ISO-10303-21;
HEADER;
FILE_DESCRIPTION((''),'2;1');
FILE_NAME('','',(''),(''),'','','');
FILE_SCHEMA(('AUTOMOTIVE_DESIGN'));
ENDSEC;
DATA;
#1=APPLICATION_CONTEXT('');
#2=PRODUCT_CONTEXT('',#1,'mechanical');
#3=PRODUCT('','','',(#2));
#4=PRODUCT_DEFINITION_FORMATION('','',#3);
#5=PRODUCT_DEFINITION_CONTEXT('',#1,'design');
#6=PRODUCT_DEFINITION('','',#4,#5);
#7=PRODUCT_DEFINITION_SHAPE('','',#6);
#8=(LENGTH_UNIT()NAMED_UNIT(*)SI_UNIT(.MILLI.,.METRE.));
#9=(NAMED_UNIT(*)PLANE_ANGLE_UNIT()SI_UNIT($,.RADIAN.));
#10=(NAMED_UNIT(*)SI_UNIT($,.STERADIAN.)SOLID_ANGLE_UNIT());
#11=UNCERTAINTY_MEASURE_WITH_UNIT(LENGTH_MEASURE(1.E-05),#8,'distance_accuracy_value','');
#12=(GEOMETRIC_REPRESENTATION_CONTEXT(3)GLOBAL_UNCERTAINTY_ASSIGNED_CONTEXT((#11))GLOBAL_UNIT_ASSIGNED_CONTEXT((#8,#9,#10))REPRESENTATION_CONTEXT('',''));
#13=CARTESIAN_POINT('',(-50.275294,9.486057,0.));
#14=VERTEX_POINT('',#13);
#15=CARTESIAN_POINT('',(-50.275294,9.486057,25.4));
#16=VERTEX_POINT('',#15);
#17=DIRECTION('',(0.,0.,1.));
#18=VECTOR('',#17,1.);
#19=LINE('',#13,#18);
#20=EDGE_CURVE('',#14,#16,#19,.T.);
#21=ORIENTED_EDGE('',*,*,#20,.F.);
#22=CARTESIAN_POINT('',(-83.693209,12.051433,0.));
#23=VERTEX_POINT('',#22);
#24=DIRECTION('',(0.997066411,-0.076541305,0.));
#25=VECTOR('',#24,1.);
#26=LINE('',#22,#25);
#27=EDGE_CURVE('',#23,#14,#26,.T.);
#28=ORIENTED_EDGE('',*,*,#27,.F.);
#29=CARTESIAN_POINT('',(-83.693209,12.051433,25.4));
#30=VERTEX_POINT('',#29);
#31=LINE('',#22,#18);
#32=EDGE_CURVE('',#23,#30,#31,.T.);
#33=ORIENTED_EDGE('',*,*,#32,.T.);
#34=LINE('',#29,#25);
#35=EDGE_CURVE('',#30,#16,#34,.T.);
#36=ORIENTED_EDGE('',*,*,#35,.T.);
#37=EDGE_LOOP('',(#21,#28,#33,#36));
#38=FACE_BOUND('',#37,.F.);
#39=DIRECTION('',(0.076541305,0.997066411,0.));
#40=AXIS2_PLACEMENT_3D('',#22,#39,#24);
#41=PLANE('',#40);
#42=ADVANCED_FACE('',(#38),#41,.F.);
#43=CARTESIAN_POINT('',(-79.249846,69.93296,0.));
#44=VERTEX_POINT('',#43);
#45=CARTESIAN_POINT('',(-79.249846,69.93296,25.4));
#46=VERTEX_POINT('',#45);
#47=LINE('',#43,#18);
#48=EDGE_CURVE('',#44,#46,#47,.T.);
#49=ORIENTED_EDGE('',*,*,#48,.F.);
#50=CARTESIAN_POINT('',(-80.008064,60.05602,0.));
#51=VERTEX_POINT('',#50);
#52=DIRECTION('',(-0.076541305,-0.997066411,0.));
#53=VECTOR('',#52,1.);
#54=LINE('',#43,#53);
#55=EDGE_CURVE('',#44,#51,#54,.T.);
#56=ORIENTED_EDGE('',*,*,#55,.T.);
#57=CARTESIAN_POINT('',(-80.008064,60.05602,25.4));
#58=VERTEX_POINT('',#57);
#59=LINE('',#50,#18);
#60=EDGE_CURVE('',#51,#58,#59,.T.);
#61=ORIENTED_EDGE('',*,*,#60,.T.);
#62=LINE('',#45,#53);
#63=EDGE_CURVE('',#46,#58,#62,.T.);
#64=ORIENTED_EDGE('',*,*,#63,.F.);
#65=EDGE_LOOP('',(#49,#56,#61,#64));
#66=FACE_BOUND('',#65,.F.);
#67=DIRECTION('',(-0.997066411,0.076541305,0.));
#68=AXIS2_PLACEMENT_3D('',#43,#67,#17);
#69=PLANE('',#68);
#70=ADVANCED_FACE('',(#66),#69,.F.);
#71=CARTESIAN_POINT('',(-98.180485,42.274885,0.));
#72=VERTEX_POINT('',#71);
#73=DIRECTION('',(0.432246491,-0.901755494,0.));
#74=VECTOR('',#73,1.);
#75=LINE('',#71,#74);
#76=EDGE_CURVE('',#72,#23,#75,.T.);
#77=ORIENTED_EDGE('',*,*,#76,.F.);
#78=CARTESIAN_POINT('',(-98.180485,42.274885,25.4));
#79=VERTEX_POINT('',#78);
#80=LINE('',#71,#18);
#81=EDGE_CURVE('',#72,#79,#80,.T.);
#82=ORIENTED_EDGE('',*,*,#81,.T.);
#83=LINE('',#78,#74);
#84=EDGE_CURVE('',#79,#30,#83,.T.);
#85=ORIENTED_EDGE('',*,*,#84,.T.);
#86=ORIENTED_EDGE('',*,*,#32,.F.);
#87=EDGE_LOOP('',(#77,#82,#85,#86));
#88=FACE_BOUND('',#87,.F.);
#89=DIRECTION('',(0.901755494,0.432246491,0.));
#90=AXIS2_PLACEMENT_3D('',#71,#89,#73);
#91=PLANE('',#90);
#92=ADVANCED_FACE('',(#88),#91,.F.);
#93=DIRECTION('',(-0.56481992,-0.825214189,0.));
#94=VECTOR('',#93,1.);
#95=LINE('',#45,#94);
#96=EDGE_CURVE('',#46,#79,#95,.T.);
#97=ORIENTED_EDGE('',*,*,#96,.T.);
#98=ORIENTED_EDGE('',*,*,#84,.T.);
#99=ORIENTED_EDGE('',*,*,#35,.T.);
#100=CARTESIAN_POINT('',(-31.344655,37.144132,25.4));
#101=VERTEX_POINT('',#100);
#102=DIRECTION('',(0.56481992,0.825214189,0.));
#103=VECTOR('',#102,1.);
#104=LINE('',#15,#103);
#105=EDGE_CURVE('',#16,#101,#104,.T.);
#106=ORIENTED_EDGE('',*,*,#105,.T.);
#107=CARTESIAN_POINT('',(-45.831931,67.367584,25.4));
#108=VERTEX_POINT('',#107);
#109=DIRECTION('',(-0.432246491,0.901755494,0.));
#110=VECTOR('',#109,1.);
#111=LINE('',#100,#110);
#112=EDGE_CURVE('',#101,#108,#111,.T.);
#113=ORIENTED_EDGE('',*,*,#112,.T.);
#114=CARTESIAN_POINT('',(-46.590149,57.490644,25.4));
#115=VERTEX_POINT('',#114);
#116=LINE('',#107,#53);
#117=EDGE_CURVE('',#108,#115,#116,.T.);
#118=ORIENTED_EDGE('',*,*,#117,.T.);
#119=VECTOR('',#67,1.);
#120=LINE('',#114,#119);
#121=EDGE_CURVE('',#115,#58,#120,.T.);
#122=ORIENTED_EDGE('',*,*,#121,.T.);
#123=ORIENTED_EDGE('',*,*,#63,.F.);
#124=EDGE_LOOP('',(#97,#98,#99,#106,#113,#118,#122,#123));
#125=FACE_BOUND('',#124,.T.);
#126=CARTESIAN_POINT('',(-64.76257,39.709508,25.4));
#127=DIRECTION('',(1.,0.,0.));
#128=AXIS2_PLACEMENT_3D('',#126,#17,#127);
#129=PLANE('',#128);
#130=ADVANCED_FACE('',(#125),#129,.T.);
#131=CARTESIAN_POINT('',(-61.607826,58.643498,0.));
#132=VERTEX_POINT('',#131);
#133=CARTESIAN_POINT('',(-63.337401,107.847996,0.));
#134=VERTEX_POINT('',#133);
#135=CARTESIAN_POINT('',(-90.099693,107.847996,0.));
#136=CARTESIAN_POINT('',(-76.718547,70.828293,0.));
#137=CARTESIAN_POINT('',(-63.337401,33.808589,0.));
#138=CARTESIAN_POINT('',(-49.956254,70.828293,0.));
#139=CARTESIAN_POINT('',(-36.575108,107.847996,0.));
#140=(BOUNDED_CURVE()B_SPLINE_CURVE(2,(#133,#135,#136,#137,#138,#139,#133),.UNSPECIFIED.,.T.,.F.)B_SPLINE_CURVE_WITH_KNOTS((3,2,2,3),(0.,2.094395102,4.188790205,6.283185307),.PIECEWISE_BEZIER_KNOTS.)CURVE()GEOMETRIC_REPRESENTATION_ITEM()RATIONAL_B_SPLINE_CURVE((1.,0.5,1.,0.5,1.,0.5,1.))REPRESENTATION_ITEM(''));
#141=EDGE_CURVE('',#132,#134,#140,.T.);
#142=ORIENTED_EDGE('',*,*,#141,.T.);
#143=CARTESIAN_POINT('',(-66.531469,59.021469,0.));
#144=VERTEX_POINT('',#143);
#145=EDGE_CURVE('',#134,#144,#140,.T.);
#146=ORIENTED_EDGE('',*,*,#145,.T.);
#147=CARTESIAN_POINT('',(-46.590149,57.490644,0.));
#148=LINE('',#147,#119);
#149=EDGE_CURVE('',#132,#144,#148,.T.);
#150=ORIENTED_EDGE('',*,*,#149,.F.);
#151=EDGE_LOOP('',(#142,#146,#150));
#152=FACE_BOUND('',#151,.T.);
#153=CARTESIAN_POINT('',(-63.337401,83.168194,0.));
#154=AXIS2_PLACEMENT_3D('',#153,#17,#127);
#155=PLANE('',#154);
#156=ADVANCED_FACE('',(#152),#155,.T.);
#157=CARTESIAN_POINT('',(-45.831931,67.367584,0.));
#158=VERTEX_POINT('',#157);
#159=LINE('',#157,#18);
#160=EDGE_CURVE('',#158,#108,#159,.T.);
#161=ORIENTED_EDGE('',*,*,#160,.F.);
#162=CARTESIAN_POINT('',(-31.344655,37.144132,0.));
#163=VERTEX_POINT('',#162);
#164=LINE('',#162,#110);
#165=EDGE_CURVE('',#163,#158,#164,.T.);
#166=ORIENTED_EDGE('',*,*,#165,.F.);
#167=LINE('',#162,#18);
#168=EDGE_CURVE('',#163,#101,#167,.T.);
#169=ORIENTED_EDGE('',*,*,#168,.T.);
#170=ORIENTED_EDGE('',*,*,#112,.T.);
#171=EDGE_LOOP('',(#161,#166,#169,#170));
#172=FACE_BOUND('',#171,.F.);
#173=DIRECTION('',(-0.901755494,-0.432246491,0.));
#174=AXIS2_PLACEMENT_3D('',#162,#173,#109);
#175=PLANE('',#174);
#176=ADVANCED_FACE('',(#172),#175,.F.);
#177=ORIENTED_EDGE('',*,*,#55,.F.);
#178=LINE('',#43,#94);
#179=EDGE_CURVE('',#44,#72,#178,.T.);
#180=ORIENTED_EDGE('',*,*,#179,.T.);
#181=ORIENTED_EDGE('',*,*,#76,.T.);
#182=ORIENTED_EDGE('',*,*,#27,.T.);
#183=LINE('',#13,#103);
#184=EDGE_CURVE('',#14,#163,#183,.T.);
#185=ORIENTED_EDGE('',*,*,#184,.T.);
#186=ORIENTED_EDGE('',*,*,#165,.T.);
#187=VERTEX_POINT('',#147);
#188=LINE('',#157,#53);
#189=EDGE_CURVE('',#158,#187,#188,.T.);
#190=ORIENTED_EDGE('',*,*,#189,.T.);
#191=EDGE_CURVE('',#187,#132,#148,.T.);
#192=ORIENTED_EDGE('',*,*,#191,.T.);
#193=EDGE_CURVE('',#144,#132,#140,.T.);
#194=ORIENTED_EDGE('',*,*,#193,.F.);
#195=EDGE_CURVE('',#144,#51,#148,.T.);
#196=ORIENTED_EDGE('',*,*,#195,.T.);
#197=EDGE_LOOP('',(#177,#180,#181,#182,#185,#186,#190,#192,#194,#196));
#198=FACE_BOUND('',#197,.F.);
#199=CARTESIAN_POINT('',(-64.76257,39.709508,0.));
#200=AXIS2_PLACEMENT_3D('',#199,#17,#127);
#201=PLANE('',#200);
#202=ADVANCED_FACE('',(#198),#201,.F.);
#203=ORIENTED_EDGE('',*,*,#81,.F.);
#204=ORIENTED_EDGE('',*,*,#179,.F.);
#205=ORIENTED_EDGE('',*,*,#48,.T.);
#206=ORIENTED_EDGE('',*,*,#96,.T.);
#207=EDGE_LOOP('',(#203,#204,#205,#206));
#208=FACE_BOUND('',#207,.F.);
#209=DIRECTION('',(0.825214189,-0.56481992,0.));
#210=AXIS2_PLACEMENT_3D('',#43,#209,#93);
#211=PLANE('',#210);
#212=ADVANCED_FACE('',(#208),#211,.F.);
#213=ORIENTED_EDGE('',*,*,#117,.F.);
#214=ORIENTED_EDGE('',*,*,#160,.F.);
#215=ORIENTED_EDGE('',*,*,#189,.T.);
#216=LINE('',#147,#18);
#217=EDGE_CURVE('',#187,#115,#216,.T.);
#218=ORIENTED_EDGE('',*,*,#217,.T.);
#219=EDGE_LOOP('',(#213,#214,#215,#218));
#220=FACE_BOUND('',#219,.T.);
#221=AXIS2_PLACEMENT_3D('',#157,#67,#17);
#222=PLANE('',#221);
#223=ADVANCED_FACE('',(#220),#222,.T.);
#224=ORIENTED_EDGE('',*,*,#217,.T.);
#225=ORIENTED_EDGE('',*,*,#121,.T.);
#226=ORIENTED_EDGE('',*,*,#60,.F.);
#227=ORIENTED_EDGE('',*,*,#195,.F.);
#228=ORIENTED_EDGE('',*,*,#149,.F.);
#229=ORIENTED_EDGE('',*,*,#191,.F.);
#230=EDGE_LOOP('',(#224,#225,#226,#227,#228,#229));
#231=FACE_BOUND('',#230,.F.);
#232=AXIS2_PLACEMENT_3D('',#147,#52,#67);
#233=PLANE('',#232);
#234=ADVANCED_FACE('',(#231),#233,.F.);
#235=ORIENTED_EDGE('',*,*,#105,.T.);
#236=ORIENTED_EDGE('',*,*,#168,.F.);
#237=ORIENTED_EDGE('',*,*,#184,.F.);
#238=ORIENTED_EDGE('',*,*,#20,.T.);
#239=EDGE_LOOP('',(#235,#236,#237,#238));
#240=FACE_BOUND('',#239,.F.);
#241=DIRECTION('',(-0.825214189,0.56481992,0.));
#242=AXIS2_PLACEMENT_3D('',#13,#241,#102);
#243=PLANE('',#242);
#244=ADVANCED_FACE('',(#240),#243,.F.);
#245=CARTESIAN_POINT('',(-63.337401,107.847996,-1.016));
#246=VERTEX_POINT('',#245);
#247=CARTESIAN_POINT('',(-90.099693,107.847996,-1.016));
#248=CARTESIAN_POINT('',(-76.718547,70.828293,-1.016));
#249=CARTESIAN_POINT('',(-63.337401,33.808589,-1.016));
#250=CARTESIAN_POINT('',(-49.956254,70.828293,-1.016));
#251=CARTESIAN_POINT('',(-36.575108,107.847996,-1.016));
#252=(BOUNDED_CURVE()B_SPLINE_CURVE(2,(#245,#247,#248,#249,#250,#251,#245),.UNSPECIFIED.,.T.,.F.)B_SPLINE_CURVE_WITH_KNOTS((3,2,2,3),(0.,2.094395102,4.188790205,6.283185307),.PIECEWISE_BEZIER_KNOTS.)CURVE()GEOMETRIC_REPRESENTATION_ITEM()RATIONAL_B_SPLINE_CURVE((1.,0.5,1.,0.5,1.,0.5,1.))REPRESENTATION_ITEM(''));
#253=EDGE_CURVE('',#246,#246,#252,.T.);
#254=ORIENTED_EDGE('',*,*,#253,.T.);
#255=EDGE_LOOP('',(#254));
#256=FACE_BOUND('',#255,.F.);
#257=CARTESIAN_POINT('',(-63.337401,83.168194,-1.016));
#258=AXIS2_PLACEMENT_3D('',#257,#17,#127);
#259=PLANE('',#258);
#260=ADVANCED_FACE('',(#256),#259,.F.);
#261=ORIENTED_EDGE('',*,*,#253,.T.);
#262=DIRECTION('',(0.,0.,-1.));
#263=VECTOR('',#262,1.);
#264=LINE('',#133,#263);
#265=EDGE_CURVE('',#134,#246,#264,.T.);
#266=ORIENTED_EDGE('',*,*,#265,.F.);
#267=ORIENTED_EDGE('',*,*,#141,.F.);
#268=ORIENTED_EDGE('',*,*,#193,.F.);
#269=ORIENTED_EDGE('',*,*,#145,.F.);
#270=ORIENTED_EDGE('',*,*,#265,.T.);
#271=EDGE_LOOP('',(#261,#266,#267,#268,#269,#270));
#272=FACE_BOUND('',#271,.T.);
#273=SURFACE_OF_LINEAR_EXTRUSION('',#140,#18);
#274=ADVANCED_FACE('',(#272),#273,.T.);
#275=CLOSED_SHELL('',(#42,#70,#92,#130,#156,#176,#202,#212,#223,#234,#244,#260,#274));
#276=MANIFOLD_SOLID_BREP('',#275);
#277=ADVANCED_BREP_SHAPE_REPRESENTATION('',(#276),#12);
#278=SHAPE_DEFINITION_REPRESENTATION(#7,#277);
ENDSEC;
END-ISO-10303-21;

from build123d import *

# Parameters (mm, degrees)
F2_DEPTH = 25.4
F4_DEPTH = 9.906
F6_DEPTH = 1.016


# Not quite as in the source:
# - the program builds the solid bodies; features that only make, move or delete a surface that nothing else refers to are left out


with BuildPart() as f2:
    # F0 (on Top) → F2 (new body)
    with BuildSketch(Plane.XY):
        Polygon((-98.1804851865, 42.2748850128), (-83.6932088757, 12.0514331916), (-50.2752936531, 9.4860565979), (-31.3446547413, 37.1441318253), (-45.8319310522, 67.3675836465), (-79.2498462748, 69.9329602402), align=None)
    extrude(amount=F2_DEPTH)

    # F4 (cut): a face of the model
    f4_faces = [f2.faces().sort_by_distance(p)[0] for p in [
        (-62.5408886635, 68.6502719433, 12.7),
    ]]
    extrude(f4_faces, amount=-F4_DEPTH, mode=Mode.SUBTRACT)

    # F5 (on Top) → F6 (join)
    with BuildSketch(Plane.XY):
        with BuildLine():
            add(Edge.make_bspline(
                [(-63.3374005556, 107.8479960561), (-90.0996928702, 107.8479960561), (-76.7185467129, 70.8282925189), (-63.3374005556, 33.8085889816), (-49.9562543983, 70.8282925189), (-36.575108241, 107.8479960561), (-63.3374005556, 107.8479960561)],
                knots=[0, 0, 0, 2.0943951024, 2.0943951024, 4.1887902048, 4.1887902048, 6.2831853072, 6.2831853072, 6.2831853072], degree=2, weights=[1, 0.5, 1, 0.5, 1, 0.5, 1]))
        make_face()
    extrude(amount=-F6_DEPTH)


solid = f2.part
